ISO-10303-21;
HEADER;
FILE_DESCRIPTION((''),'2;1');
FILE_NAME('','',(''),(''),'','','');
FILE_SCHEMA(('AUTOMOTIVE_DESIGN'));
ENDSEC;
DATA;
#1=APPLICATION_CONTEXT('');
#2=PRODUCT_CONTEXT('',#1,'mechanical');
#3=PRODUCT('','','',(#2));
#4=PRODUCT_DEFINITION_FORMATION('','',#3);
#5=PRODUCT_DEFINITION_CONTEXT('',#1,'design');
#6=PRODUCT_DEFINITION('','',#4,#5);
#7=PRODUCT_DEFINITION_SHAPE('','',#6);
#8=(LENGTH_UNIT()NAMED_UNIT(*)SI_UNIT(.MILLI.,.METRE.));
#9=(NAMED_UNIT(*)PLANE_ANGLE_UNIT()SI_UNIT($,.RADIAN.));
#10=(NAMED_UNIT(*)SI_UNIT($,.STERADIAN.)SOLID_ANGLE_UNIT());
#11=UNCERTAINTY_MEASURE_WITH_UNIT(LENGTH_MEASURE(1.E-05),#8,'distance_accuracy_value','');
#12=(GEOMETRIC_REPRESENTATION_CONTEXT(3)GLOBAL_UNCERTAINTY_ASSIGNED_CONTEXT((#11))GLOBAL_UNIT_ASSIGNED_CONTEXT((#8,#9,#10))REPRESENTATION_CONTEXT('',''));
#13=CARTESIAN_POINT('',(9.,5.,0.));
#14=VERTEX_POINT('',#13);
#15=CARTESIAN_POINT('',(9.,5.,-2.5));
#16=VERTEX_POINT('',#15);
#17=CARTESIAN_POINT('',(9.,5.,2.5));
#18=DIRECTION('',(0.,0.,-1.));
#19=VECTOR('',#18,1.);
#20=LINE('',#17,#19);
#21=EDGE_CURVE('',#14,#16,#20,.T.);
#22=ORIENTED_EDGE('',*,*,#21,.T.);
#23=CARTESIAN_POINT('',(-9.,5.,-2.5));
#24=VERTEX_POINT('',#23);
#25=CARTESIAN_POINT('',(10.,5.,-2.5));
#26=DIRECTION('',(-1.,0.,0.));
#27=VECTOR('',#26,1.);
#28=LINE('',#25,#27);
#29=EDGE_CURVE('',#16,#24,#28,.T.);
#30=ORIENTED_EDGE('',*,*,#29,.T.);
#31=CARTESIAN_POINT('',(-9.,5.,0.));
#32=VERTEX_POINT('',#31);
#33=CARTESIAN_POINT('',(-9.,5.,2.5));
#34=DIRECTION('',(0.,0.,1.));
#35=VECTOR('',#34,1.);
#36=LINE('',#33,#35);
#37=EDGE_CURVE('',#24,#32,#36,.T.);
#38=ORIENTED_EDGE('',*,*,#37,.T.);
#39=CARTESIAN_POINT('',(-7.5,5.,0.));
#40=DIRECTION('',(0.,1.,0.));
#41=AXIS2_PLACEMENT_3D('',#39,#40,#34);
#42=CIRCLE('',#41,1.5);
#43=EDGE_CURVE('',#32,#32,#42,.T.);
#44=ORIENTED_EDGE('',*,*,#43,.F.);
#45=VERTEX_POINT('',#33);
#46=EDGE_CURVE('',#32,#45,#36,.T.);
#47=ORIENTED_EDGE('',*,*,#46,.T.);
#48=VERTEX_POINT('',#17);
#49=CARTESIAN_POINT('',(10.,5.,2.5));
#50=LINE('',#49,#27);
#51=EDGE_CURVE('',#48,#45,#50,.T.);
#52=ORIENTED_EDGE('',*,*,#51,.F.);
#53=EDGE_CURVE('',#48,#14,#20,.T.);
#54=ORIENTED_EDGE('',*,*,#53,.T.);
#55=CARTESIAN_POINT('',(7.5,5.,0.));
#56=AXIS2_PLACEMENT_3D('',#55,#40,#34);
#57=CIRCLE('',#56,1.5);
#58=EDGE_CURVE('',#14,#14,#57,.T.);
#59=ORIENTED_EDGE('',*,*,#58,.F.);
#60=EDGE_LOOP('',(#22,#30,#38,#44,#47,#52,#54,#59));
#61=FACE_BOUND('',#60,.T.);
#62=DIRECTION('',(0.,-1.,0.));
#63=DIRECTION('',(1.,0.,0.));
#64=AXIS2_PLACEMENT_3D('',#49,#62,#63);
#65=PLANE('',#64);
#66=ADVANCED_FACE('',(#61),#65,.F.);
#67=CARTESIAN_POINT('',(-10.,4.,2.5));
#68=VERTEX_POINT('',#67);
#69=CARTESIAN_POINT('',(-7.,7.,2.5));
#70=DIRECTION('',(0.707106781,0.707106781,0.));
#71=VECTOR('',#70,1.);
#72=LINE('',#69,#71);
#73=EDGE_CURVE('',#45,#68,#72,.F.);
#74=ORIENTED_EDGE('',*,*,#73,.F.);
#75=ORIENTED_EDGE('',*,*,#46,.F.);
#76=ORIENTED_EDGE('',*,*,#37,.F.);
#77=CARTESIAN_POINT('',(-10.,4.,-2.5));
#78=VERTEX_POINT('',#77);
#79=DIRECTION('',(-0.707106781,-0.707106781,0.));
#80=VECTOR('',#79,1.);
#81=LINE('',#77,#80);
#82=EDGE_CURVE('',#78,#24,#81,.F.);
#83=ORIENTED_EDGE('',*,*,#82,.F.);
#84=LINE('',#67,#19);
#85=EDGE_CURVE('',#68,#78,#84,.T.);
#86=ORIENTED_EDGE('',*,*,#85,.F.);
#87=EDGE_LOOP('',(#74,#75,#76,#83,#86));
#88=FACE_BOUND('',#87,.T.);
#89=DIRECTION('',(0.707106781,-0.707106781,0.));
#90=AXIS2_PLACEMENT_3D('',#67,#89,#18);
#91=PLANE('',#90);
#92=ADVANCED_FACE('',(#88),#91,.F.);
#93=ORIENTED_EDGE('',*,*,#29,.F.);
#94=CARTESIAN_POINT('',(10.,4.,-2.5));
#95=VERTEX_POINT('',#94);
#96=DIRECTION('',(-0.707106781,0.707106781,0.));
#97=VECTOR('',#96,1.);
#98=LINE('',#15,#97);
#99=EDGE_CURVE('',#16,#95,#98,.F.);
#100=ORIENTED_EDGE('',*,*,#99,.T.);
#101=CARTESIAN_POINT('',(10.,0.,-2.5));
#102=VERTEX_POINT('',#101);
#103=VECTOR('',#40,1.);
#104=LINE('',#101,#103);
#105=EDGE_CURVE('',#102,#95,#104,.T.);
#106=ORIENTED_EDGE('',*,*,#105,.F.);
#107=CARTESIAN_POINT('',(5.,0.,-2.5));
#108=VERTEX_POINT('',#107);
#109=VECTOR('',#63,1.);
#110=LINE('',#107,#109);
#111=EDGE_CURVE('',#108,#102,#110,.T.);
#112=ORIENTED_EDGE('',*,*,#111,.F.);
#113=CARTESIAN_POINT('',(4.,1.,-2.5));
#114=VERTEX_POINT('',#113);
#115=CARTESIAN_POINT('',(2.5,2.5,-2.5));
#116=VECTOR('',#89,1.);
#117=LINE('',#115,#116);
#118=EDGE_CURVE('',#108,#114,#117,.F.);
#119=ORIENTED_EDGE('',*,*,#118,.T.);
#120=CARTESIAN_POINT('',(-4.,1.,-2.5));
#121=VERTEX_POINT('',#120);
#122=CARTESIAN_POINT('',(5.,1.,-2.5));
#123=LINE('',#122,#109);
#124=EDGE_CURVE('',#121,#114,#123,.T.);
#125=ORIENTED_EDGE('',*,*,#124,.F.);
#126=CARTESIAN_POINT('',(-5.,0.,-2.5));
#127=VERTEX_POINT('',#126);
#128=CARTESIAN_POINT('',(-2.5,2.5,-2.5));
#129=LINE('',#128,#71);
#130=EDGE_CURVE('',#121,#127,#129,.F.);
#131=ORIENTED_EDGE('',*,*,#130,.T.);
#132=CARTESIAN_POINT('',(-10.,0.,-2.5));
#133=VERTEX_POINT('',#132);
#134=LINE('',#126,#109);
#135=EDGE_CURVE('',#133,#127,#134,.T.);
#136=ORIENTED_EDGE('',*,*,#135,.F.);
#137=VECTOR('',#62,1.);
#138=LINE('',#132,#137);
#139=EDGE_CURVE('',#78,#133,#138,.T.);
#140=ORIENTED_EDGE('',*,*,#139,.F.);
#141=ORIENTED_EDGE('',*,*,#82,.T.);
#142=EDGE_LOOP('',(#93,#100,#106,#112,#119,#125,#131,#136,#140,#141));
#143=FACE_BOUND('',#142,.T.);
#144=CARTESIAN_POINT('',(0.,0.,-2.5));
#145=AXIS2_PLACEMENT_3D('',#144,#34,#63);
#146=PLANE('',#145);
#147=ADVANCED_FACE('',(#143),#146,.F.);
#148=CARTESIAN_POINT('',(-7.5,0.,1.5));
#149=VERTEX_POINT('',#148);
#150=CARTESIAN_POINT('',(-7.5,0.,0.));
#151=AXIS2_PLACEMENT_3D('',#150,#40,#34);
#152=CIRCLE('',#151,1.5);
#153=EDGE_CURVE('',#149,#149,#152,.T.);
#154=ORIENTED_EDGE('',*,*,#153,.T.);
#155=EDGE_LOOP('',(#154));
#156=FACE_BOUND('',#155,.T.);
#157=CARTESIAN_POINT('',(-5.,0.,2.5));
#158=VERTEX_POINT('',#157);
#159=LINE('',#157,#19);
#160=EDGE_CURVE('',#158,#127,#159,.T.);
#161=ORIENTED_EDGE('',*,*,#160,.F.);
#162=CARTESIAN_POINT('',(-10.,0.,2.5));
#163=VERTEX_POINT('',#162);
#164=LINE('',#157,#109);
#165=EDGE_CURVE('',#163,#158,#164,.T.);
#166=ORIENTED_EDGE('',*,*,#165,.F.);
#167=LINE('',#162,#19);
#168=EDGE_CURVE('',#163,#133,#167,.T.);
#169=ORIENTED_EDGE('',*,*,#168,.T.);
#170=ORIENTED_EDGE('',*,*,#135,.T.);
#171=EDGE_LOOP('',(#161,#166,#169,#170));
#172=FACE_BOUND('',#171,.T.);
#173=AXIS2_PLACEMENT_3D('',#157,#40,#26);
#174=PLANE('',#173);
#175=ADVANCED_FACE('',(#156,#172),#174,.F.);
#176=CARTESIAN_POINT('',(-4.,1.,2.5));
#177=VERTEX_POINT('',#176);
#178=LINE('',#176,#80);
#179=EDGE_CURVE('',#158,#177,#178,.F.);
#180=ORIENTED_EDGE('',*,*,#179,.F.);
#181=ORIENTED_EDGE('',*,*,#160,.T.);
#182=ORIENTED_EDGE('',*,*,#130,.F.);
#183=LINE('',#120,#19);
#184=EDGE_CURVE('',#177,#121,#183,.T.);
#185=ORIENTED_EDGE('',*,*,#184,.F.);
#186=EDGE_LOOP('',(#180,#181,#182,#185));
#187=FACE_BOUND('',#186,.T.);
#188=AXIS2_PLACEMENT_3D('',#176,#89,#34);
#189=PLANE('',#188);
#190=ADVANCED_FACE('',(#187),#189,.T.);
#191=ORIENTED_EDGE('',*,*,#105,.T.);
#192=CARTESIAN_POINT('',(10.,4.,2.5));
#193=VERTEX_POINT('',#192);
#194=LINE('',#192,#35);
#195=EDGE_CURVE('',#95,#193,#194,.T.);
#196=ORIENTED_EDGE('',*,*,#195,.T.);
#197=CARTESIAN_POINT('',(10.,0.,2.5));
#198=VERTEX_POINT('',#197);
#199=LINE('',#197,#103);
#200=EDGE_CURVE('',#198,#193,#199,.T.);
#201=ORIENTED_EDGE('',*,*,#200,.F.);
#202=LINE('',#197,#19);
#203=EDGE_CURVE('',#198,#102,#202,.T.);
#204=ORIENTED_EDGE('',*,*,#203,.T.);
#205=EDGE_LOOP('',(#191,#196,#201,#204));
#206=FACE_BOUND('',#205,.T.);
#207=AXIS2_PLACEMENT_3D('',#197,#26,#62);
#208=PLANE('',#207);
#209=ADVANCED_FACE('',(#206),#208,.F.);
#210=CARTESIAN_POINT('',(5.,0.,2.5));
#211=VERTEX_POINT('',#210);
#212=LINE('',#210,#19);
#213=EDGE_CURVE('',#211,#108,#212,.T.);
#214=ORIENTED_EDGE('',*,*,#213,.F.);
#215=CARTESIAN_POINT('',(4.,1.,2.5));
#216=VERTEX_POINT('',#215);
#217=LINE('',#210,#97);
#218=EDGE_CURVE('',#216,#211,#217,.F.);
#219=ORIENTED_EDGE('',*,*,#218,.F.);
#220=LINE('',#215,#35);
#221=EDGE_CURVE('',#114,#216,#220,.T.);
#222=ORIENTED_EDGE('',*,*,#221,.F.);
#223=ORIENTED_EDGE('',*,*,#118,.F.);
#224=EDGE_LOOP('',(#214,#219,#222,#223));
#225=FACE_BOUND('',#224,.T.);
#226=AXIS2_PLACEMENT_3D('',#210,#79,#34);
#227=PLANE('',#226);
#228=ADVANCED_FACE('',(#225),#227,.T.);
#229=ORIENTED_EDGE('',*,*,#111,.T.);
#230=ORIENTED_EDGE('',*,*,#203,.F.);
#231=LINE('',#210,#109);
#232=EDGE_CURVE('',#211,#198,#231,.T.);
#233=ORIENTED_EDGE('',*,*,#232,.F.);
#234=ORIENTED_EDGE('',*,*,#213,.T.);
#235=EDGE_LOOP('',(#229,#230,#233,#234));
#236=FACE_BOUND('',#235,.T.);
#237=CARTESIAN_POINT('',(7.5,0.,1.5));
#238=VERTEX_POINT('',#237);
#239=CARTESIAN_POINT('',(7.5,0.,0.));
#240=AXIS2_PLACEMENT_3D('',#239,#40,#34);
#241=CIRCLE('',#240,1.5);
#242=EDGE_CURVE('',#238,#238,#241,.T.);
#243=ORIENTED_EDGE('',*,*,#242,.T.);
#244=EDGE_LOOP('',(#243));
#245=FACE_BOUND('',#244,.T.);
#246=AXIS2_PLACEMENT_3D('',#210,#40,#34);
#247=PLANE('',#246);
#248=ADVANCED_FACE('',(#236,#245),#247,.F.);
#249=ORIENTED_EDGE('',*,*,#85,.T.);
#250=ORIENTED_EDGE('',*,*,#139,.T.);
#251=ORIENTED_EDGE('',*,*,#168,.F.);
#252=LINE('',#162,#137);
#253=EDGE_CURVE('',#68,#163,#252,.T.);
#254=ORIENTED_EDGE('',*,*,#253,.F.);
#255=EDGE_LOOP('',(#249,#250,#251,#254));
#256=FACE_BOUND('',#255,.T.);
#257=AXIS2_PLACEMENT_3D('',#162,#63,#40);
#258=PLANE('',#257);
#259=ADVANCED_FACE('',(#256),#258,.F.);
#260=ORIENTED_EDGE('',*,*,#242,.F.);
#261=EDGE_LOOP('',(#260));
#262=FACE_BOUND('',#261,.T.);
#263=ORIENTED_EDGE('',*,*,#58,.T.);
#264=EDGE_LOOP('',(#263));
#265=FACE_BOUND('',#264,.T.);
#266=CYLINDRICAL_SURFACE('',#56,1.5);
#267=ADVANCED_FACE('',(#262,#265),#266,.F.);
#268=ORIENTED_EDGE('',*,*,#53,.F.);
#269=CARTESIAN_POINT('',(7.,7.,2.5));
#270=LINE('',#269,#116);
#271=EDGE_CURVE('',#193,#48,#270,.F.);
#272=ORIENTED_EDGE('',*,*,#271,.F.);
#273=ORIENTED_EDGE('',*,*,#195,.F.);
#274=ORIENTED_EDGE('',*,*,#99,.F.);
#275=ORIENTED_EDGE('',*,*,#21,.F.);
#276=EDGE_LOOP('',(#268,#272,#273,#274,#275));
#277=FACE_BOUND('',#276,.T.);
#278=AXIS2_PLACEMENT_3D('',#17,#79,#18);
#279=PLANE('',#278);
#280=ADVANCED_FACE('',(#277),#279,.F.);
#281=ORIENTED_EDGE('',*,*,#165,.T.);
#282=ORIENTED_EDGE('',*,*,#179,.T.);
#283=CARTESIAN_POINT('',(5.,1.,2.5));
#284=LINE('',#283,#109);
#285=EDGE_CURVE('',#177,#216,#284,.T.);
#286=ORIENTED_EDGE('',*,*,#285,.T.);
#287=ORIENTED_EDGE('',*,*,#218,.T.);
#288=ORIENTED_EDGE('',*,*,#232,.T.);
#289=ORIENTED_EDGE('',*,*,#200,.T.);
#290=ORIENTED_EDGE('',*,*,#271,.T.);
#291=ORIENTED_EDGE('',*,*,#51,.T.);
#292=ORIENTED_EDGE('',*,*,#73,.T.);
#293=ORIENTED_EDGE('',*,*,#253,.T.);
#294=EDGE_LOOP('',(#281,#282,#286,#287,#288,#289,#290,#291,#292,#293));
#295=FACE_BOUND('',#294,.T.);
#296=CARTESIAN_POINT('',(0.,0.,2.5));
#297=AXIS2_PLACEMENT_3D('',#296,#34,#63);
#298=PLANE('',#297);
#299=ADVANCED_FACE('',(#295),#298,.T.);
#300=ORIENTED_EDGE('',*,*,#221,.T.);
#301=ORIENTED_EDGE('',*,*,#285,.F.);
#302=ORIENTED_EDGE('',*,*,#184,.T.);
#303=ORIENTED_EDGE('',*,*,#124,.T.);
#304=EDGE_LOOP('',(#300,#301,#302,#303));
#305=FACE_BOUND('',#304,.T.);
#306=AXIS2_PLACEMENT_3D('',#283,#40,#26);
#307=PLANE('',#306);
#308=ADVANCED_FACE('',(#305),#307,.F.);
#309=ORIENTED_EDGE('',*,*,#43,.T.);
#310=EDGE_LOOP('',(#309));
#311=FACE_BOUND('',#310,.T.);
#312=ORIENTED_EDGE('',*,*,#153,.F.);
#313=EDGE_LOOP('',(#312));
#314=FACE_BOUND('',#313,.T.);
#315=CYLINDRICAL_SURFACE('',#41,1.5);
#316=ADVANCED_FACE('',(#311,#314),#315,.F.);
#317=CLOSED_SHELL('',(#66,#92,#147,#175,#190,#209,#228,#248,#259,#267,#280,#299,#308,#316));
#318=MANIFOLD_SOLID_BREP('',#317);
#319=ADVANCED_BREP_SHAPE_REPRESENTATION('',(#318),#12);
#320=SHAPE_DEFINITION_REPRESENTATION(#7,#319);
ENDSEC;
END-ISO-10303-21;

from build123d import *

# Parameters (mm, degrees)
EXTRUDE_1_DEPTH   = 2.5
MM_1_D            = 3
CHAMFER_START     = -3
CHAMFER_1_DEPTH   = 6
CHAMFER_START_2   = -2.5
CHAMFER_1_2_DEPTH = 5


with BuildPart() as part:
    # 草图1 → 凸台-拉伸1 (new, symmetric)
    with BuildSketch(Plane.XY):
        Polygon((5, 0), (10, 0), (10, 5), (-10, 5), (-10, 0), (-5, 0), (-5, 1), (5, 1), align=None)
    extrude(amount=EXTRUDE_1_DEPTH, both=True)

    # 大小mm 暗销孔1 (through all)
    with Locations(Plane(origin=(0, 5, 0), x_dir=(1, 0, 0), z_dir=(0, 1, 0))):
        with Locations((-7.5, 0), (7.5, 0)):
            Hole(MM_1_D / 2)

    # 倒角1: read off the stored shape, not the designer's step
    # 倒角1 outline → 倒角1 (cut)
    with BuildSketch(Plane.XY.offset(CHAMFER_START)):
        Polygon((10, 5), (9, 5), (10, 4), align=None)
        Polygon((-10, 4), (-9, 5), (-10, 5), align=None)
    extrude(amount=CHAMFER_1_DEPTH, mode=Mode.SUBTRACT)

    # Chamfer 1 2 outline → Chamfer 1 2 (add)
    with BuildSketch(Plane.XY.offset(CHAMFER_START_2)):
        Polygon((5, 1), (4, 1), (5, 0), align=None)
        Polygon((-5, 0), (-4, 1), (-5, 1), align=None)
    extrude(amount=CHAMFER_1_2_DEPTH)


solid = part.part
